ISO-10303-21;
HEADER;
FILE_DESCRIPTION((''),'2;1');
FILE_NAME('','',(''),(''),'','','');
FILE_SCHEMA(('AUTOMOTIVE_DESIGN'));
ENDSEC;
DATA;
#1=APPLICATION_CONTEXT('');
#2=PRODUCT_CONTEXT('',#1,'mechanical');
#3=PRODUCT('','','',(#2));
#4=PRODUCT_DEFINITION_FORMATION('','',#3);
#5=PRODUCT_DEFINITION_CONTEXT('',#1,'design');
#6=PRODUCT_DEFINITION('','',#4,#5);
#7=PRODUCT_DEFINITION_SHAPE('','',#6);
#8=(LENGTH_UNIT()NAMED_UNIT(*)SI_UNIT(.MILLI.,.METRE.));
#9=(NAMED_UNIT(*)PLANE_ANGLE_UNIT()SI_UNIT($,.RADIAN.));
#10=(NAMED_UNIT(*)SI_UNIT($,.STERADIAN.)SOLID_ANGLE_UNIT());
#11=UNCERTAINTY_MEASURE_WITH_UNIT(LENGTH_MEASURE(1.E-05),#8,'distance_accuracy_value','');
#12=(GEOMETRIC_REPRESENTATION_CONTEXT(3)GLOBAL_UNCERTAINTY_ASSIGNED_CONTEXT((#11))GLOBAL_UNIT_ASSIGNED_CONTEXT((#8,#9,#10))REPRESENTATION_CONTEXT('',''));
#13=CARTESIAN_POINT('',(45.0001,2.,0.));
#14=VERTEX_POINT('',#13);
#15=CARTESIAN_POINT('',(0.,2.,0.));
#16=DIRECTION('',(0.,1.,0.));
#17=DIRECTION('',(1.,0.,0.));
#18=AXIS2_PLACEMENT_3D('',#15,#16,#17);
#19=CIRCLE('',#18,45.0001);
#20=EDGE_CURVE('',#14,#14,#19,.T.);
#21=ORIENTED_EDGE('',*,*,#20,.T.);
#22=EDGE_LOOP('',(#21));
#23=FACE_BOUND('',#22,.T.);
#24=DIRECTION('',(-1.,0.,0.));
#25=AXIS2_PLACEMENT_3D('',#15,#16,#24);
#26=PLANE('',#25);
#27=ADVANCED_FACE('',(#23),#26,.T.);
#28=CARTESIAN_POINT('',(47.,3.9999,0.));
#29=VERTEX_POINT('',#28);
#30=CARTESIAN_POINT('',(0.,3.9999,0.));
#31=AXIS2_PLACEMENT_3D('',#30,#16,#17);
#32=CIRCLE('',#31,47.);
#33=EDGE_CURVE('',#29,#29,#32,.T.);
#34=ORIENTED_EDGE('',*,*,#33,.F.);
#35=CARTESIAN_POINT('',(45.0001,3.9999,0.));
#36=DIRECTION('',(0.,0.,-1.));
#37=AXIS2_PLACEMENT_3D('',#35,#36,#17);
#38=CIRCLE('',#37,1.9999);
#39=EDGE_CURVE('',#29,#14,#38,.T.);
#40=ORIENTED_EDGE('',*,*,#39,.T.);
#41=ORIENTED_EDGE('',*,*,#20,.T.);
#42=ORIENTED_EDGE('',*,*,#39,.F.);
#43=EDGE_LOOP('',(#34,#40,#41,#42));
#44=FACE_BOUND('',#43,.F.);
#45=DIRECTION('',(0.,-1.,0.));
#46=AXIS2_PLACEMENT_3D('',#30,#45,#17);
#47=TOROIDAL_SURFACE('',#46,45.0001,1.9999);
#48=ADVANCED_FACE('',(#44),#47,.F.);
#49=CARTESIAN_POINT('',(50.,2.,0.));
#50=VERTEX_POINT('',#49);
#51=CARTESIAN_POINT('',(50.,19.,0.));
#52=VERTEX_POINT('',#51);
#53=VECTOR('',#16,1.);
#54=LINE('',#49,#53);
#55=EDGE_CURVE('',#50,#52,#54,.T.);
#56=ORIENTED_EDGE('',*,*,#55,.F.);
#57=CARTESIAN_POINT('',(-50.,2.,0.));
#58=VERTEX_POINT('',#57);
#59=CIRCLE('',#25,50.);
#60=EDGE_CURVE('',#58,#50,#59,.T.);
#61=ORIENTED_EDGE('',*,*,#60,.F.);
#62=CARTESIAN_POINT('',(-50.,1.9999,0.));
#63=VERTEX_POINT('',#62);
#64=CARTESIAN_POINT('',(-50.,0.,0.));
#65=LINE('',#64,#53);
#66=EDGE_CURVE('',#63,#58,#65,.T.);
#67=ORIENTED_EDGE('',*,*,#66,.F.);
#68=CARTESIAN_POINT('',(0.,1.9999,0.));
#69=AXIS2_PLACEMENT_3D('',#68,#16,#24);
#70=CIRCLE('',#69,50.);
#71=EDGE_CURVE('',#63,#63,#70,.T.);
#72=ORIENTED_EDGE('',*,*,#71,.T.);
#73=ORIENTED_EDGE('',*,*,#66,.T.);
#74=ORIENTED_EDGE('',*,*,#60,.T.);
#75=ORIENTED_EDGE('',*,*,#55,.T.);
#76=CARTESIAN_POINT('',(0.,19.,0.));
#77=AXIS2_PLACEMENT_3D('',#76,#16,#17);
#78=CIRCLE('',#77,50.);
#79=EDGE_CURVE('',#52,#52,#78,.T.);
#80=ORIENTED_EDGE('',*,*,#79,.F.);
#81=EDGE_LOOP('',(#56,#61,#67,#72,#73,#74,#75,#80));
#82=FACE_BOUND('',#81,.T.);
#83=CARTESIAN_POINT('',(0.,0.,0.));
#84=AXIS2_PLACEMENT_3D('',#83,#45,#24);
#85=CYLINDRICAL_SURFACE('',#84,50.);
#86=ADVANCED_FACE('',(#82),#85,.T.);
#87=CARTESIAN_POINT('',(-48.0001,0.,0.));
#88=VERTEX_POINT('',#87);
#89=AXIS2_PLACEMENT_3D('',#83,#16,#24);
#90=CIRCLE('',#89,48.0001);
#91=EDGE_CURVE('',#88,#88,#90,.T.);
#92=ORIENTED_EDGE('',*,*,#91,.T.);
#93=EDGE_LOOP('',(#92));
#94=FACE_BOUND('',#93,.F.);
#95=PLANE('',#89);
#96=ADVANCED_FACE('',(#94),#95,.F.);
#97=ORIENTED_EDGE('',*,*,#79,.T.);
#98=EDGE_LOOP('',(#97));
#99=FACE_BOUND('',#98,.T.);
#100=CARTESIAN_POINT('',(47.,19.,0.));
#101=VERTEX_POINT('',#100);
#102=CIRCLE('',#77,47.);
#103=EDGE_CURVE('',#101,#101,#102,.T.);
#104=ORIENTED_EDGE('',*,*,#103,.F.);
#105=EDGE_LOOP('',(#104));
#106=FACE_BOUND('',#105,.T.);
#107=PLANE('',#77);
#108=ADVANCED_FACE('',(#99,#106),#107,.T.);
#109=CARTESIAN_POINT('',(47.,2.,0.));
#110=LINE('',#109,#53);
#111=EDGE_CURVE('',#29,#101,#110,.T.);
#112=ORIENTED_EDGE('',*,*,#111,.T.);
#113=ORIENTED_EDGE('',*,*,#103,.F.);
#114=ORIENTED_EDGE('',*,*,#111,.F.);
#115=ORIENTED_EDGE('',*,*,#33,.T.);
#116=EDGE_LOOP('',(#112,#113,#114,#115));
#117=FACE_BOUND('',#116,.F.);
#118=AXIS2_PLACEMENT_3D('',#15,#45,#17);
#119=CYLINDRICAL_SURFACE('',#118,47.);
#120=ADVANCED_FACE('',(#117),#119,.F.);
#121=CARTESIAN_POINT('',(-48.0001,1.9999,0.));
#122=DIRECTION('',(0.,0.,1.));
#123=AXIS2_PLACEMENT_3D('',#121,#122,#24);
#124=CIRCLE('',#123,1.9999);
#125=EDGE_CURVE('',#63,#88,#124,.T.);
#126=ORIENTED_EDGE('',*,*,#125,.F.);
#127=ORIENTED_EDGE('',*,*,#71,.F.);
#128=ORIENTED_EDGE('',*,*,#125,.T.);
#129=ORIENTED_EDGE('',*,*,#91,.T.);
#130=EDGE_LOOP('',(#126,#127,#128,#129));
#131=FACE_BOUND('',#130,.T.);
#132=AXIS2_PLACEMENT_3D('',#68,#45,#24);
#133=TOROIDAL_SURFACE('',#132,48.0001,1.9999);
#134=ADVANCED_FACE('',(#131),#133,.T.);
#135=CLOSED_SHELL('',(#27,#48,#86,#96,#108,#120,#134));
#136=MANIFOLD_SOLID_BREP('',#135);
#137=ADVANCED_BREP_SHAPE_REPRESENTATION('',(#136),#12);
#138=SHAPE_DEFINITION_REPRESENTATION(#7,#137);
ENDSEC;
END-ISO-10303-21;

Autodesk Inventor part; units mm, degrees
ref_plane "YZ Plane" through (0, 0, 0) normal (1, 0, 0) x (0, 1, 0)
ref_plane "XZ Plane" through (0, 0, 0) normal (0, 1, 0) x (-1, 0, 0)
ref_plane "XY Plane" through (0, 0, 0) normal (0, 0, 1) x (1, 0, 0)
sketch "Sketch1" plane through (0, 0, 0) normal (0, 1, 0) x (-1, 0, 0)
  line L0 (-50, -50) -> (50, -50) construction
  line L1 (50, -50) -> (50, 50) construction
  line L2 (50, 50) -> (-50, 50) construction
  line L3 (-50, 50) -> (-50, -50) construction
  line L4 (-50, -50) -> (50, 50) construction
  line L5 (50, -50) -> (-50, 50) construction
  circle A0 centre (0, 0) radius 50
  dimension "d0" = 100
  dimension "d8" = 100
extrude "Extrusion1" add sketch "Sketch1" along normal blind 2
sketch "Sketch2" plane through (0, 2, 0) normal (0, 1, 0) x (1, 0, 0)
  circle A0 centre (0, 0) radius 50 projected
  circle A1 centre (0, 0) radius 47
  dimension "d9" = 3
extrude "Extrusion2" add sketch "Sketch2" along normal blind 17
fillet "Fillet1" radius 2 2 edges at (-47, 2, 0) (50, 0, 0)
properties part number "Petri"
